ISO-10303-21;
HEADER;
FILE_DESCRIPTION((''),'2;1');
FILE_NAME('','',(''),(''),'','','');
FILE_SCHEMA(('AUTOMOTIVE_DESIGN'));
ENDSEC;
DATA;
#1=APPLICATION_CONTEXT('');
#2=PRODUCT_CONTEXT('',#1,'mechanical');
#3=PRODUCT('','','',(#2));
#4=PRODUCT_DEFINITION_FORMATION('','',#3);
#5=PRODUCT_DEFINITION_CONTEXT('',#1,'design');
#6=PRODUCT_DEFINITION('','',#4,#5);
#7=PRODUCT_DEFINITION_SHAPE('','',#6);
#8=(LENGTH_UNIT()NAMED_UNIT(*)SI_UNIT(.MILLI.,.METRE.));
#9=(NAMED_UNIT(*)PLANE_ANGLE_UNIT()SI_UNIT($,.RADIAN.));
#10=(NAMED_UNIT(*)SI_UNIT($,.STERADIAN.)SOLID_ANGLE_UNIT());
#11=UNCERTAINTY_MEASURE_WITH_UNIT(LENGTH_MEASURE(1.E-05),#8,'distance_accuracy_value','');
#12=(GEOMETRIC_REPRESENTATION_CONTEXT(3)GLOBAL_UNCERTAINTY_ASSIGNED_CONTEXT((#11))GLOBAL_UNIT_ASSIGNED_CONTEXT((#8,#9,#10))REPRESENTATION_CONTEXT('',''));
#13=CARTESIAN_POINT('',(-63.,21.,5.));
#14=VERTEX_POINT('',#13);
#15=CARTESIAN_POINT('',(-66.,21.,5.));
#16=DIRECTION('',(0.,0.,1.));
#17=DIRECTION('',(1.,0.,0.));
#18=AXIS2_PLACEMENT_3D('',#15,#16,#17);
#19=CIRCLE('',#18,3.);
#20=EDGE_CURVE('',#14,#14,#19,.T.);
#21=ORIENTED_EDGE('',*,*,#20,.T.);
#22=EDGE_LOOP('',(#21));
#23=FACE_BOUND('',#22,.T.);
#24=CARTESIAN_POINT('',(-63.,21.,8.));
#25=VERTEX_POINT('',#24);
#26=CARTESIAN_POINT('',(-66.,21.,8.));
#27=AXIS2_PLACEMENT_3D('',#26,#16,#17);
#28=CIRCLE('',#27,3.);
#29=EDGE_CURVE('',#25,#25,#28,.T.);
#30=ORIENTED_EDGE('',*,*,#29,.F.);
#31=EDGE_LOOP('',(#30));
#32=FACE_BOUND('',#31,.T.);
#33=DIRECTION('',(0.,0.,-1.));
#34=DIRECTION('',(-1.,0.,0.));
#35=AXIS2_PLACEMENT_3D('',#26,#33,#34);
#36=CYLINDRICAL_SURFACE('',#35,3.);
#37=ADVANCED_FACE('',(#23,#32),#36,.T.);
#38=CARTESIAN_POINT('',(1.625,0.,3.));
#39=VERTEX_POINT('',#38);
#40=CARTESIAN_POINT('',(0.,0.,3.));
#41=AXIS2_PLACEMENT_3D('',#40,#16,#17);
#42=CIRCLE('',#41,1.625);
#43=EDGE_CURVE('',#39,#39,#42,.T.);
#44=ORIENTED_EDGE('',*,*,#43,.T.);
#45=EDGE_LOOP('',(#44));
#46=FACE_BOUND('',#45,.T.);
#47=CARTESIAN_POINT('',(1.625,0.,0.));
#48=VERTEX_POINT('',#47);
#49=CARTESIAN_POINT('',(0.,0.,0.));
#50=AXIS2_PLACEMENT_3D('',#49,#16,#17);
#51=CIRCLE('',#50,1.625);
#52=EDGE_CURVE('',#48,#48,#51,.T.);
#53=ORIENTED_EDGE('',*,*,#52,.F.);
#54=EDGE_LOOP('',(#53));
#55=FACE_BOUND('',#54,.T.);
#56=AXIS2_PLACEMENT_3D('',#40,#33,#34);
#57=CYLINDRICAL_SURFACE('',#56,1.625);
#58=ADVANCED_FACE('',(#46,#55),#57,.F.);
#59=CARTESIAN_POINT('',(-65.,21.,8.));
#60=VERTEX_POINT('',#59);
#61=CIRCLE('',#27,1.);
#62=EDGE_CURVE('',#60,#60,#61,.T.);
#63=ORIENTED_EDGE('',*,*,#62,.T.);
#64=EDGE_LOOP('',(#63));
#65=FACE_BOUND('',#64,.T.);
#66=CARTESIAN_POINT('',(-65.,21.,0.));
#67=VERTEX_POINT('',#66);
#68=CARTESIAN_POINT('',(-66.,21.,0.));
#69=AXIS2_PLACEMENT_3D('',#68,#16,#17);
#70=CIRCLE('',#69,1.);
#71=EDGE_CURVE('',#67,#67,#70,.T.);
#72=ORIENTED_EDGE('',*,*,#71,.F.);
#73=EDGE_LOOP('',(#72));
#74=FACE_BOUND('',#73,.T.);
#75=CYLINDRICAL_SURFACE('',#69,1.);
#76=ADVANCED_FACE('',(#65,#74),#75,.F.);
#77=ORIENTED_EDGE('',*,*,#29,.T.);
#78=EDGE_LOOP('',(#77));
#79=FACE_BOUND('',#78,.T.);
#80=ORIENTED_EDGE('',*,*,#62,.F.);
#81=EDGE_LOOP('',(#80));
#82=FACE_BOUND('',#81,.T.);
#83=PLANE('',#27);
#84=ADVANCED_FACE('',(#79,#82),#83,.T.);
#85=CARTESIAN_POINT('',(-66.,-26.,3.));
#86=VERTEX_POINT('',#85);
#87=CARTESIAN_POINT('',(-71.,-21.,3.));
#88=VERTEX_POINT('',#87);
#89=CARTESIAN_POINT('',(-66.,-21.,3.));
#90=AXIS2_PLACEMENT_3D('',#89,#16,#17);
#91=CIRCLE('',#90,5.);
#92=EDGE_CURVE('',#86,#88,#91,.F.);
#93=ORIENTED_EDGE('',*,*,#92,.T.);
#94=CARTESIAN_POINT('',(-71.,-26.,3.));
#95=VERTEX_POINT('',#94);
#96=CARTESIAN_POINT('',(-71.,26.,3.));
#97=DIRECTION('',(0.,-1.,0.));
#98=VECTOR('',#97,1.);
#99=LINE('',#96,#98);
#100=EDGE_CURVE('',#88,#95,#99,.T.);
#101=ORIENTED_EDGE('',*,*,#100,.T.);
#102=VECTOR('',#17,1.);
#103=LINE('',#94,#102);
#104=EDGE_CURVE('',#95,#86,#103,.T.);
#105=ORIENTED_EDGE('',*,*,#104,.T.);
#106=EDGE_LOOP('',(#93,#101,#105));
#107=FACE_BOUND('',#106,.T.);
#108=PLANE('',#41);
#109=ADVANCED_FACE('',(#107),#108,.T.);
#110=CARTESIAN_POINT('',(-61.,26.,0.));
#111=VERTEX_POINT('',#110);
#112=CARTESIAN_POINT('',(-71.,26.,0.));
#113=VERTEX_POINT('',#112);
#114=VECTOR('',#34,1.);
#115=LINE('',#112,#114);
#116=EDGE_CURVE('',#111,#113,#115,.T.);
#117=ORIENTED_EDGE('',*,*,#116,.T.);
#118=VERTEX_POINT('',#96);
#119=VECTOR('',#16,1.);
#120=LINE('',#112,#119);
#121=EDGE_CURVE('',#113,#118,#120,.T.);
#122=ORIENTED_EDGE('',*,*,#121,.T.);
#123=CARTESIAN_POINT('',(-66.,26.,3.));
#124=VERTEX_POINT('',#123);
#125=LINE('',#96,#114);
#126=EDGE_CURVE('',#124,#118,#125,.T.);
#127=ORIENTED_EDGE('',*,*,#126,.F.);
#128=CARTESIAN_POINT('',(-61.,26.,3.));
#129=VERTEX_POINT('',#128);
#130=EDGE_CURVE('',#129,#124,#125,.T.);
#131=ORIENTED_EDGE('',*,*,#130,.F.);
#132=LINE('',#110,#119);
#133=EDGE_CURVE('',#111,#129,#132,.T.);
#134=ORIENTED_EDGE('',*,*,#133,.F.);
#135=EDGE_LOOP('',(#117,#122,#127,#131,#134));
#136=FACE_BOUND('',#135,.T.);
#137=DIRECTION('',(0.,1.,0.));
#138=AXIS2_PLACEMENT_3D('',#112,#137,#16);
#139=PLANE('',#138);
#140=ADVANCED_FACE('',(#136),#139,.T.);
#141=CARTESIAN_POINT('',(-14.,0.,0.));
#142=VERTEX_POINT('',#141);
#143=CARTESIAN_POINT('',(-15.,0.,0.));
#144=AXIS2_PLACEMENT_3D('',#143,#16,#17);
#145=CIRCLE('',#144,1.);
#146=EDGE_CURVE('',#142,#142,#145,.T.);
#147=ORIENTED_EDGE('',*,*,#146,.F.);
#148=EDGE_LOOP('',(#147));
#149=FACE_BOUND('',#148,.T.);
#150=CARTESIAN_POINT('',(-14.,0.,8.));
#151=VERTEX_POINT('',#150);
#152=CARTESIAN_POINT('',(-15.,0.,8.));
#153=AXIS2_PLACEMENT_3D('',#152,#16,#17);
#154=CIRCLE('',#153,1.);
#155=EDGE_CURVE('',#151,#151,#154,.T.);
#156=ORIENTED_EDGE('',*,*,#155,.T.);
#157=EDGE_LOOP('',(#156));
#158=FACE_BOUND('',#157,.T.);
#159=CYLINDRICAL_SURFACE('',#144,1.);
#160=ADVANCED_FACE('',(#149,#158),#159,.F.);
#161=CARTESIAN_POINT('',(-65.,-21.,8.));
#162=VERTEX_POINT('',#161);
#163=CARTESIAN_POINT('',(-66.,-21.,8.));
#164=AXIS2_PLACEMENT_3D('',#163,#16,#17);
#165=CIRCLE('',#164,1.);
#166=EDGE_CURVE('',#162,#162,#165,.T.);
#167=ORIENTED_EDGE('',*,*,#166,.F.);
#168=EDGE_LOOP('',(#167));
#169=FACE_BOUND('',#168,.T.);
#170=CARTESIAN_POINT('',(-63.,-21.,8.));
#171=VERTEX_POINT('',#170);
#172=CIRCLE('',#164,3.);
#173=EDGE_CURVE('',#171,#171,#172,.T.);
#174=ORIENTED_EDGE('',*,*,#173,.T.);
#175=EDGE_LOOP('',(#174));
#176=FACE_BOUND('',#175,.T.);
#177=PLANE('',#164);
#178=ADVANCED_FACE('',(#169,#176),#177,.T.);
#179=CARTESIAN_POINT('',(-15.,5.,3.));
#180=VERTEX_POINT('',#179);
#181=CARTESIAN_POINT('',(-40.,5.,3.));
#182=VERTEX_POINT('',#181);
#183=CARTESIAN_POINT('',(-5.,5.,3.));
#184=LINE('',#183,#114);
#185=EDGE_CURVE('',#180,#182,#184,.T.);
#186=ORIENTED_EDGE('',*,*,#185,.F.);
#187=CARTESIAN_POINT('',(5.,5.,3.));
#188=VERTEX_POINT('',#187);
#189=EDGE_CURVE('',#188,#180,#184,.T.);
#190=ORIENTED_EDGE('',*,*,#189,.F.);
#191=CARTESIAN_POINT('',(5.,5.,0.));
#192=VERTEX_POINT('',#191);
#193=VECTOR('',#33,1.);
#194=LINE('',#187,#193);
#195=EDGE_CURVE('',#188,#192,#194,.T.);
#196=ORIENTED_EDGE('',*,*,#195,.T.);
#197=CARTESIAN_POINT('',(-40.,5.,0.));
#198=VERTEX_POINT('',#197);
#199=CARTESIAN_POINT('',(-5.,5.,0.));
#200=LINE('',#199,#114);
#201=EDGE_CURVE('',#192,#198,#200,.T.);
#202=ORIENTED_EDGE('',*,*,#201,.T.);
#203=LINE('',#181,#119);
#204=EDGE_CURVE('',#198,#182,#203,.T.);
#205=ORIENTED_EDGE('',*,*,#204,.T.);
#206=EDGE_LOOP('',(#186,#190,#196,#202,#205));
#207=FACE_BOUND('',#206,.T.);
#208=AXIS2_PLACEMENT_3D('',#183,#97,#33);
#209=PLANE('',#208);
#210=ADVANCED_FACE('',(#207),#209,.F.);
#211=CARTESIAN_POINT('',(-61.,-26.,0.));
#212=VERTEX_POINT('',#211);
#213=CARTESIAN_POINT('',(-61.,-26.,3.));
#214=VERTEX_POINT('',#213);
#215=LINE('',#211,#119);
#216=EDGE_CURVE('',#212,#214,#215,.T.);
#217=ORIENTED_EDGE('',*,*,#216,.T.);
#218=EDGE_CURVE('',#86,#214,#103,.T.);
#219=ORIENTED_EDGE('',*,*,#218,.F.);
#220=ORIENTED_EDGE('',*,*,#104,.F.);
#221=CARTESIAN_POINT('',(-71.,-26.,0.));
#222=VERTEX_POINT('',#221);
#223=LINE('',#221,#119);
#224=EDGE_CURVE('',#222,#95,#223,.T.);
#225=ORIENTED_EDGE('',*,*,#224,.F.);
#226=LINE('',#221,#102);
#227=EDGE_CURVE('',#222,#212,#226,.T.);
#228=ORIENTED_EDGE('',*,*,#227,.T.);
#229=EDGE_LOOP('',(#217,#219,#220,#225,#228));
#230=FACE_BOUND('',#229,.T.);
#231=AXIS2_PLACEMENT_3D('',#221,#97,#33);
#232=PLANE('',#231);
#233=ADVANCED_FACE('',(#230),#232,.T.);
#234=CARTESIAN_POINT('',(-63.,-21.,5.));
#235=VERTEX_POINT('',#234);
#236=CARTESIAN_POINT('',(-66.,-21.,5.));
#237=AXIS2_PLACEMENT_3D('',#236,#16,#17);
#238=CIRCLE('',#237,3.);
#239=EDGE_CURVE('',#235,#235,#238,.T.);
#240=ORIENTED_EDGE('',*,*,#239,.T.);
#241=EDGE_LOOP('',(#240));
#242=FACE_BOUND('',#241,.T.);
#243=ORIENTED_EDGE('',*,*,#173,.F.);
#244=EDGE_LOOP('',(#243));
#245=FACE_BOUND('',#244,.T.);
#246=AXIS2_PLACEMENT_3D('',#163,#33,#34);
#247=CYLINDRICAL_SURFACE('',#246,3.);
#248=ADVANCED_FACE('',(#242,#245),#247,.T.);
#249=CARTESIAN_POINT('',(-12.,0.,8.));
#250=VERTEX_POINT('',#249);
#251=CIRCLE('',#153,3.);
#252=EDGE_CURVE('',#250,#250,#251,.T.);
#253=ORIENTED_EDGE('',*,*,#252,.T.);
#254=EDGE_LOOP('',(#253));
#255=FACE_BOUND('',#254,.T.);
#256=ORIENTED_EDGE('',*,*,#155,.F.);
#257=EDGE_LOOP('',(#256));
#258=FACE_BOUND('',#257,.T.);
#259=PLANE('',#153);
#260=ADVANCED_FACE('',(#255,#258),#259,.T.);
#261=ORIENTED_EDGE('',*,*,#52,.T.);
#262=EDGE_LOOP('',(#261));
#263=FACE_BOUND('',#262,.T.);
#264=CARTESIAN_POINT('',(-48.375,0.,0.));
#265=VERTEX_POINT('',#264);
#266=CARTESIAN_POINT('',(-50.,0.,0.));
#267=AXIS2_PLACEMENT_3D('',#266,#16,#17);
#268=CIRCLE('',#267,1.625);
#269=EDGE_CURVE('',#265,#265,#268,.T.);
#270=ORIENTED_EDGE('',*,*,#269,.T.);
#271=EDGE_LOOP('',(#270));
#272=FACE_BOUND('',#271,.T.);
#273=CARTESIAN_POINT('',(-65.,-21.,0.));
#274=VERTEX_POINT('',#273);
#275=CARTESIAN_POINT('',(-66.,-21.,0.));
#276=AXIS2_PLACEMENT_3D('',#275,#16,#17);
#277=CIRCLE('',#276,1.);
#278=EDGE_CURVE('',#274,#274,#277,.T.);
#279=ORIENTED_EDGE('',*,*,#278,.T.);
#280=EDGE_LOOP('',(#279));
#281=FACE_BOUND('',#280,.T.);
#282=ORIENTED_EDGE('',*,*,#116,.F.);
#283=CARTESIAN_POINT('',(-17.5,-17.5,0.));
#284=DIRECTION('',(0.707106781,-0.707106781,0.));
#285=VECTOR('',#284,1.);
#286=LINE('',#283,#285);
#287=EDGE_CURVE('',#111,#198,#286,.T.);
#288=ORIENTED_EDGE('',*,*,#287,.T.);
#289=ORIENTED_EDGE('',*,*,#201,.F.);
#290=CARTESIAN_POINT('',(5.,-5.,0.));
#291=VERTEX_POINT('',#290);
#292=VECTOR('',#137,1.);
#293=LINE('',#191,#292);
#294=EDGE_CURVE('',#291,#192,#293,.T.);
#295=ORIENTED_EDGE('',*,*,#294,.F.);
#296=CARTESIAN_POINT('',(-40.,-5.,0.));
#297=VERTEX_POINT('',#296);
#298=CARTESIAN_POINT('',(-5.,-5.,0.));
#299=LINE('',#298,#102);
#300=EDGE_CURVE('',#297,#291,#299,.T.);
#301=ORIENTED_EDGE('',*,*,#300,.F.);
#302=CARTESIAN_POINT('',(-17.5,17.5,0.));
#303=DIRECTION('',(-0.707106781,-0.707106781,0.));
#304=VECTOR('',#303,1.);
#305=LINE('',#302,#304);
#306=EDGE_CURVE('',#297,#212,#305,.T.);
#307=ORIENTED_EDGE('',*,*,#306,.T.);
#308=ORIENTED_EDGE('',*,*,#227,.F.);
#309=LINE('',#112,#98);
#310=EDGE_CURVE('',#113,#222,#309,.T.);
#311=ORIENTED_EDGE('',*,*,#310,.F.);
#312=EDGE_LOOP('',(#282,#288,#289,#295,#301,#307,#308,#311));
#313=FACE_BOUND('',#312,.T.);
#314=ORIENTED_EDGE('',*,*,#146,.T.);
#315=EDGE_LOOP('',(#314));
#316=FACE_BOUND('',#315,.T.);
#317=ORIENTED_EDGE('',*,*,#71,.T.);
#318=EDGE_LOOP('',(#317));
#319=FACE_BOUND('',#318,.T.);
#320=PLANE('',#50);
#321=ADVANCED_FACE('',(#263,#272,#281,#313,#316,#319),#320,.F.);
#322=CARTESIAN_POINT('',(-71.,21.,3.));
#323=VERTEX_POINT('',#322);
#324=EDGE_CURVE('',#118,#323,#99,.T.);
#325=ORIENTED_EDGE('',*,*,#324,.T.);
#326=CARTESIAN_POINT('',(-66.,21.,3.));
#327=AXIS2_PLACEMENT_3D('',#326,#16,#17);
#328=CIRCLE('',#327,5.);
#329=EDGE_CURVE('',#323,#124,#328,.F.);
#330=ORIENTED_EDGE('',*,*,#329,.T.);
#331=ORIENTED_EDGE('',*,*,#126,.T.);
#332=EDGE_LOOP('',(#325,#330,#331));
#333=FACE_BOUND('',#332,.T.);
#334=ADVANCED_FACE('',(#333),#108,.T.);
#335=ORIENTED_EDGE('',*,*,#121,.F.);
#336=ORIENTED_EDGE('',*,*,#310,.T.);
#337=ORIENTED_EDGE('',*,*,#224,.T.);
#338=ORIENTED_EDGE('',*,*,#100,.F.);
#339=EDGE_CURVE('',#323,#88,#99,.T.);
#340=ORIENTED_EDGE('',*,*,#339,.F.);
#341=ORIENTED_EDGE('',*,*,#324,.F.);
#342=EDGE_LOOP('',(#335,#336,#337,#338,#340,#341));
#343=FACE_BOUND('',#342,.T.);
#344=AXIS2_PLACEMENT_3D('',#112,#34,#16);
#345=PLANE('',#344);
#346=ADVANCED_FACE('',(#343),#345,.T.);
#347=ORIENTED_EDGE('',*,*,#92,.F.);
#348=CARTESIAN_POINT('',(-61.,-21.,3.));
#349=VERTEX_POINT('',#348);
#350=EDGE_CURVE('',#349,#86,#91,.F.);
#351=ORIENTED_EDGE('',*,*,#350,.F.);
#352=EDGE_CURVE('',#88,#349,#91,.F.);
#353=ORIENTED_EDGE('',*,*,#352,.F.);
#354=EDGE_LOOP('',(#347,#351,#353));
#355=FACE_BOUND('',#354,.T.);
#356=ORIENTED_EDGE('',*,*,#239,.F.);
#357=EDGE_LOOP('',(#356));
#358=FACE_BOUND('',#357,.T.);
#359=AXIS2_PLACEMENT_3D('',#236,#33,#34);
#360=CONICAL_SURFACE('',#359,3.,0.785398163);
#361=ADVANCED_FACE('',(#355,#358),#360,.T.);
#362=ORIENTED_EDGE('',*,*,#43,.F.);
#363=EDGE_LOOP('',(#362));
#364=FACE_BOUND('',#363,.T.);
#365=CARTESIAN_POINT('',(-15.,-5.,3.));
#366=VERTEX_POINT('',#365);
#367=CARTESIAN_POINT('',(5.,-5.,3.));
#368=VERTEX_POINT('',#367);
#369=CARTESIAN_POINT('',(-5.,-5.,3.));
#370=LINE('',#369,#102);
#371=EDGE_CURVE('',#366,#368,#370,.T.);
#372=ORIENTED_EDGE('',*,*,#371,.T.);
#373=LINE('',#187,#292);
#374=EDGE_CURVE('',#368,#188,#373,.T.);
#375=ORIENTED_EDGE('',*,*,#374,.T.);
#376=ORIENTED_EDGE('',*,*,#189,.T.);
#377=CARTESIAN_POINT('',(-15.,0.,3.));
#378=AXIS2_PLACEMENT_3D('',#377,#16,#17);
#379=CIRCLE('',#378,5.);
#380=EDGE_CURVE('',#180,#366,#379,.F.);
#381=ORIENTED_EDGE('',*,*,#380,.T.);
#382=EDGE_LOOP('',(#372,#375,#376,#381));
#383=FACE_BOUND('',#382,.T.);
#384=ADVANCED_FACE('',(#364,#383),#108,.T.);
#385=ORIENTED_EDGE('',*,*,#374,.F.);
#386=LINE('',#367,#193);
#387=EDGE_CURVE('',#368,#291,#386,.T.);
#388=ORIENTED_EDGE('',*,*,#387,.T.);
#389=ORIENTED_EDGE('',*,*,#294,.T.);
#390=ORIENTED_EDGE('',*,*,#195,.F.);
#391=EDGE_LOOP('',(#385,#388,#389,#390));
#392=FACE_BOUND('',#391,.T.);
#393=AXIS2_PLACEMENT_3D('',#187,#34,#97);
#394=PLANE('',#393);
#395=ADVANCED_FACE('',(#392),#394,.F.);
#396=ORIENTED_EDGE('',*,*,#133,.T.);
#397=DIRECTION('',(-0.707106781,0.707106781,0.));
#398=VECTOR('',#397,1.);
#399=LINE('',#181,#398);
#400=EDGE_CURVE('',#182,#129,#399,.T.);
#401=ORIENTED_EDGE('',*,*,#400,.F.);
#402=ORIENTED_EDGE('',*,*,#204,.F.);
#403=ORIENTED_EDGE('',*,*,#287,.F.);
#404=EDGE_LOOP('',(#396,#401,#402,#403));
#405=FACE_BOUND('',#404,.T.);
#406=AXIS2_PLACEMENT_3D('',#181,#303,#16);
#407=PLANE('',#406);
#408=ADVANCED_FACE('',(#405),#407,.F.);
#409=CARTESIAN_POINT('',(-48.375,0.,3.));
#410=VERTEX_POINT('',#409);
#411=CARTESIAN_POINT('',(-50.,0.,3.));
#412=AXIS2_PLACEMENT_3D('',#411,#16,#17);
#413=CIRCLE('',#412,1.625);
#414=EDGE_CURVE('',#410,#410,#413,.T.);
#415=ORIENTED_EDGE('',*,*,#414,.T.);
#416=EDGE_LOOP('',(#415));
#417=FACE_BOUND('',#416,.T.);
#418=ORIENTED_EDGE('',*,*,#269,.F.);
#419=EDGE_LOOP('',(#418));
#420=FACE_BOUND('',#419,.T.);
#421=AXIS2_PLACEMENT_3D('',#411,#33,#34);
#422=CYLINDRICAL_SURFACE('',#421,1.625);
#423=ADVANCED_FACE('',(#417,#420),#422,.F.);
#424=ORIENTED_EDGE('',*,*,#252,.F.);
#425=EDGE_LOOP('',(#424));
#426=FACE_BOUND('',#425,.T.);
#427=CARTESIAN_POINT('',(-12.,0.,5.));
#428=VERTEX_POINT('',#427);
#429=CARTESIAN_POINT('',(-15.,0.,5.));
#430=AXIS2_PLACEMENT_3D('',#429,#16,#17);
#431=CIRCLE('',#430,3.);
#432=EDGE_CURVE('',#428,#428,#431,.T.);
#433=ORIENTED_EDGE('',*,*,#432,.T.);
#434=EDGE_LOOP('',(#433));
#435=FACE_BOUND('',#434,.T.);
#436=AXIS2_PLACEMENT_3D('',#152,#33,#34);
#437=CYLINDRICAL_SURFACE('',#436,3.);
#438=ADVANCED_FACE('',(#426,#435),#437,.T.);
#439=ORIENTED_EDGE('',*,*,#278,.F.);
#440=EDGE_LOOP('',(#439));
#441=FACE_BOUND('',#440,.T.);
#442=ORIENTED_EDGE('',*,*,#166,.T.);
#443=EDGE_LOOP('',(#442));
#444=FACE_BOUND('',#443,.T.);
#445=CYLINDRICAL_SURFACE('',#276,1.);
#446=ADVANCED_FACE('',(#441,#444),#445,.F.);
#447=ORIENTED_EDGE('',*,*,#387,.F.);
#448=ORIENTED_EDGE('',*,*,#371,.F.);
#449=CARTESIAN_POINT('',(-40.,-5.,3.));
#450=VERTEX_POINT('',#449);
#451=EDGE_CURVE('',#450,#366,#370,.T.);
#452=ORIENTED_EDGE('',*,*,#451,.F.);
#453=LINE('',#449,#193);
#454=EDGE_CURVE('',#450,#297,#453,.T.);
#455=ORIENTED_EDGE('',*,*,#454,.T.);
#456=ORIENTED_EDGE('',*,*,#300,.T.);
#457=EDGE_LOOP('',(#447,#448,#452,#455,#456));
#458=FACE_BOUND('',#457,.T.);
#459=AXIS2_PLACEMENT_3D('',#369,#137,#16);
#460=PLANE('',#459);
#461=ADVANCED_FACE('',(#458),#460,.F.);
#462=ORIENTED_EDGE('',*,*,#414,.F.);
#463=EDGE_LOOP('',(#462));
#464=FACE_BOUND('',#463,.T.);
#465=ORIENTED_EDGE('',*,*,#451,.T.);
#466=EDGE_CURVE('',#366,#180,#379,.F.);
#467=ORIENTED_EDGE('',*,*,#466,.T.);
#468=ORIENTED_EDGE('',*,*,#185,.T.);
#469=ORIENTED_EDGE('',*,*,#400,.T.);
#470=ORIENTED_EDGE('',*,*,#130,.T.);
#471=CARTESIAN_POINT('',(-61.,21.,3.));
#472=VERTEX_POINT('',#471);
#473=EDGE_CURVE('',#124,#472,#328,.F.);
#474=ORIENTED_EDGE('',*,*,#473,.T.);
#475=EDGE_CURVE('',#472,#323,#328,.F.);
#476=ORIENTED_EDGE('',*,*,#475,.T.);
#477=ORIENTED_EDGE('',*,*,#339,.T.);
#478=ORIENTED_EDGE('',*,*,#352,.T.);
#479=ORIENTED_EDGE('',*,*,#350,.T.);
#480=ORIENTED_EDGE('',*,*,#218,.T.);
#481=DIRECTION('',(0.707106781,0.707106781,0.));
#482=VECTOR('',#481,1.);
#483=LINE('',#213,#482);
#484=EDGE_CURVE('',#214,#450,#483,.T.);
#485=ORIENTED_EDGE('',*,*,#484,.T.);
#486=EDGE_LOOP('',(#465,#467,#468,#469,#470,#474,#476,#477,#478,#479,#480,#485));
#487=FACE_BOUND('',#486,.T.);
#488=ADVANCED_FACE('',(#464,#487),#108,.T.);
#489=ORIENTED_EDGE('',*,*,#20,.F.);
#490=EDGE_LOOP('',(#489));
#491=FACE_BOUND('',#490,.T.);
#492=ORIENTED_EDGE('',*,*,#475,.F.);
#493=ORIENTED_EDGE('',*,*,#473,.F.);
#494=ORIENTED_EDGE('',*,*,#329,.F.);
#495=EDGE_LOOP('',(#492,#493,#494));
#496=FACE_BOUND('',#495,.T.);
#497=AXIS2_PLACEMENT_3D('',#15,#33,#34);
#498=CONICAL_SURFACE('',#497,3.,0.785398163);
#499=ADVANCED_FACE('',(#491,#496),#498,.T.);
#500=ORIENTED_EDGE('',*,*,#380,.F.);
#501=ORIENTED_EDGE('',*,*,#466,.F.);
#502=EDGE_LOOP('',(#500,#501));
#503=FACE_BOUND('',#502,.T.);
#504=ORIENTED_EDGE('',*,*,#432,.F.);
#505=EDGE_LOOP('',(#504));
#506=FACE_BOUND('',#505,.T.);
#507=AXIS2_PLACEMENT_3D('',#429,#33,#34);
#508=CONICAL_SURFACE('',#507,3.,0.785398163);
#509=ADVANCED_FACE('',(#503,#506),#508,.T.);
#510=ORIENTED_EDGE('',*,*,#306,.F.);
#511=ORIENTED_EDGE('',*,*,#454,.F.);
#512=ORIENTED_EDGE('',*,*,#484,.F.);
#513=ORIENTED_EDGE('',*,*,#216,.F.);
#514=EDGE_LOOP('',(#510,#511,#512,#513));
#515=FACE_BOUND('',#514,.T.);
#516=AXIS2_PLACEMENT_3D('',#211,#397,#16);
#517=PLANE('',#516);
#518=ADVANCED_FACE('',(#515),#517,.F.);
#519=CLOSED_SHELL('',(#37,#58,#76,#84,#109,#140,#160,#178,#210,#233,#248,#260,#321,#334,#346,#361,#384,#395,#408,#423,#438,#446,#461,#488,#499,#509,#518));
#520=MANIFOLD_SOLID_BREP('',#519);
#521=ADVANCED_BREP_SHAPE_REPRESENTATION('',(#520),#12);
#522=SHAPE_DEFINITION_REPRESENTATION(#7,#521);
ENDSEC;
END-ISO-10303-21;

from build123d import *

# Parameters (mm, degrees)
CROQUIS1_W                = 10
CROQUIS1_H                = 10
CROQUIS1_R                = 1.625
SALIENTE_EXTRUIR1_DEPTH   = 3
SALIENTE_EXTRUIR1_2_DEPTH = 3
CROQUIS2_W                = 40
CROQUIS2_H                = 10
CROQUIS2_R                = 1
SALIENTE_EXTRUIR2_DEPTH   = 3
SALIENTE_EXTRUIR3_START   = 5
CROQUIS3_R                = 3
CROQUIS3_R_2              = 1
SALIENTE_EXTRUIR3_DEPTH   = 5
CHAFL_N1_SIZE             = 2
CHAFL_N2_SIZE             = 21


with BuildPart() as part:
    # Croquis1 → Saliente-Extruir1 (new body)
    with BuildSketch(Plane.XY):
        Rectangle(CROQUIS1_W, CROQUIS1_H)
        Circle(CROQUIS1_R, mode=Mode.SUBTRACT)
    extrude(amount=SALIENTE_EXTRUIR1_DEPTH)



with BuildPart() as body_2:
    # Croquis1 → Saliente-Extruir1 2 (new body)
    with BuildSketch(Plane.XY):
        with Locations((-50, 0)):
            Rectangle(CROQUIS1_W, CROQUIS1_H)
        with Locations((-50, 0)):
            Circle(CROQUIS1_R, mode=Mode.SUBTRACT)
    extrude(amount=SALIENTE_EXTRUIR1_2_DEPTH)


with BuildPart() as part_1:
    add(part.part)

    add(body_2.part)  # Saliente-Extruir2 merges body 2
    # Croquis2 → Saliente-Extruir2 (add)
    # profile 1 of 2: a face of its own
    with BuildSketch(Plane.XY.offset(3)):
        with Locations((-25, 0)):
            Rectangle(CROQUIS2_W, CROQUIS2_H)
        with Locations((-15, 0)):
            Circle(CROQUIS2_R, mode=Mode.SUBTRACT)
    # profile 2 of 2: a face of its own
    with BuildSketch(Plane.XY.offset(3)):
        Polygon((-61, -5), (-61, -26), (-71, -26), (-71, 26), (-61, 26), (-61, 5), (-55, 5), (-55, -5), align=None)
        with Locations((-66, 21)):
            Circle(CROQUIS2_R, mode=Mode.SUBTRACT)
        with Locations((-66, -21)):
            Circle(CROQUIS2_R, mode=Mode.SUBTRACT)
    extrude(amount=-SALIENTE_EXTRUIR2_DEPTH)

    # Croquis3 → Saliente-Extruir3 (add)
    # profile 1 of 3: a face of its own
    with BuildSketch(Plane.XY.offset(3).offset(SALIENTE_EXTRUIR3_START)):
        with Locations((-66, 21)):
            Circle(CROQUIS3_R)
        with Locations((-66, 21)):
            Circle(CROQUIS3_R_2, mode=Mode.SUBTRACT)
    # profile 2 of 3: a face of its own
    with BuildSketch(Plane.XY.offset(3).offset(SALIENTE_EXTRUIR3_START)):
        with Locations((-66, -21)):
            Circle(CROQUIS3_R)
        with Locations((-66, -21)):
            Circle(CROQUIS3_R_2, mode=Mode.SUBTRACT)
    # profile 3 of 3: a face of its own
    with BuildSketch(Plane.XY.offset(3).offset(SALIENTE_EXTRUIR3_START)):
        with Locations((-15, 0)):
            Circle(CROQUIS3_R)
        with Locations((-15, 0)):
            Circle(CROQUIS3_R_2, mode=Mode.SUBTRACT)
    extrude(amount=-SALIENTE_EXTRUIR3_DEPTH)

    # Chaflán1
    chafl_n1_edges = [part_1.edges().sort_by_distance(p)[0] for p in [
        (-69, 21, 3),
        (-69, -21, 3),
        (-18, 0, 3),
    ]]
    chamfer(chafl_n1_edges, length=CHAFL_N1_SIZE - 0.0001)  # a hair under: the kernel refuses the full size

    # Chaflán2
    chafl_n2_edges = [part_1.edges().sort_by_distance(p)[0] for p in [
        (-61, 5, 1.5),
        (-61, -5, 1.5),
    ]]
    chamfer(chafl_n2_edges, length=CHAFL_N2_SIZE - 0.0001)  # a hair under: the kernel refuses the full size


solid = part_1.part
